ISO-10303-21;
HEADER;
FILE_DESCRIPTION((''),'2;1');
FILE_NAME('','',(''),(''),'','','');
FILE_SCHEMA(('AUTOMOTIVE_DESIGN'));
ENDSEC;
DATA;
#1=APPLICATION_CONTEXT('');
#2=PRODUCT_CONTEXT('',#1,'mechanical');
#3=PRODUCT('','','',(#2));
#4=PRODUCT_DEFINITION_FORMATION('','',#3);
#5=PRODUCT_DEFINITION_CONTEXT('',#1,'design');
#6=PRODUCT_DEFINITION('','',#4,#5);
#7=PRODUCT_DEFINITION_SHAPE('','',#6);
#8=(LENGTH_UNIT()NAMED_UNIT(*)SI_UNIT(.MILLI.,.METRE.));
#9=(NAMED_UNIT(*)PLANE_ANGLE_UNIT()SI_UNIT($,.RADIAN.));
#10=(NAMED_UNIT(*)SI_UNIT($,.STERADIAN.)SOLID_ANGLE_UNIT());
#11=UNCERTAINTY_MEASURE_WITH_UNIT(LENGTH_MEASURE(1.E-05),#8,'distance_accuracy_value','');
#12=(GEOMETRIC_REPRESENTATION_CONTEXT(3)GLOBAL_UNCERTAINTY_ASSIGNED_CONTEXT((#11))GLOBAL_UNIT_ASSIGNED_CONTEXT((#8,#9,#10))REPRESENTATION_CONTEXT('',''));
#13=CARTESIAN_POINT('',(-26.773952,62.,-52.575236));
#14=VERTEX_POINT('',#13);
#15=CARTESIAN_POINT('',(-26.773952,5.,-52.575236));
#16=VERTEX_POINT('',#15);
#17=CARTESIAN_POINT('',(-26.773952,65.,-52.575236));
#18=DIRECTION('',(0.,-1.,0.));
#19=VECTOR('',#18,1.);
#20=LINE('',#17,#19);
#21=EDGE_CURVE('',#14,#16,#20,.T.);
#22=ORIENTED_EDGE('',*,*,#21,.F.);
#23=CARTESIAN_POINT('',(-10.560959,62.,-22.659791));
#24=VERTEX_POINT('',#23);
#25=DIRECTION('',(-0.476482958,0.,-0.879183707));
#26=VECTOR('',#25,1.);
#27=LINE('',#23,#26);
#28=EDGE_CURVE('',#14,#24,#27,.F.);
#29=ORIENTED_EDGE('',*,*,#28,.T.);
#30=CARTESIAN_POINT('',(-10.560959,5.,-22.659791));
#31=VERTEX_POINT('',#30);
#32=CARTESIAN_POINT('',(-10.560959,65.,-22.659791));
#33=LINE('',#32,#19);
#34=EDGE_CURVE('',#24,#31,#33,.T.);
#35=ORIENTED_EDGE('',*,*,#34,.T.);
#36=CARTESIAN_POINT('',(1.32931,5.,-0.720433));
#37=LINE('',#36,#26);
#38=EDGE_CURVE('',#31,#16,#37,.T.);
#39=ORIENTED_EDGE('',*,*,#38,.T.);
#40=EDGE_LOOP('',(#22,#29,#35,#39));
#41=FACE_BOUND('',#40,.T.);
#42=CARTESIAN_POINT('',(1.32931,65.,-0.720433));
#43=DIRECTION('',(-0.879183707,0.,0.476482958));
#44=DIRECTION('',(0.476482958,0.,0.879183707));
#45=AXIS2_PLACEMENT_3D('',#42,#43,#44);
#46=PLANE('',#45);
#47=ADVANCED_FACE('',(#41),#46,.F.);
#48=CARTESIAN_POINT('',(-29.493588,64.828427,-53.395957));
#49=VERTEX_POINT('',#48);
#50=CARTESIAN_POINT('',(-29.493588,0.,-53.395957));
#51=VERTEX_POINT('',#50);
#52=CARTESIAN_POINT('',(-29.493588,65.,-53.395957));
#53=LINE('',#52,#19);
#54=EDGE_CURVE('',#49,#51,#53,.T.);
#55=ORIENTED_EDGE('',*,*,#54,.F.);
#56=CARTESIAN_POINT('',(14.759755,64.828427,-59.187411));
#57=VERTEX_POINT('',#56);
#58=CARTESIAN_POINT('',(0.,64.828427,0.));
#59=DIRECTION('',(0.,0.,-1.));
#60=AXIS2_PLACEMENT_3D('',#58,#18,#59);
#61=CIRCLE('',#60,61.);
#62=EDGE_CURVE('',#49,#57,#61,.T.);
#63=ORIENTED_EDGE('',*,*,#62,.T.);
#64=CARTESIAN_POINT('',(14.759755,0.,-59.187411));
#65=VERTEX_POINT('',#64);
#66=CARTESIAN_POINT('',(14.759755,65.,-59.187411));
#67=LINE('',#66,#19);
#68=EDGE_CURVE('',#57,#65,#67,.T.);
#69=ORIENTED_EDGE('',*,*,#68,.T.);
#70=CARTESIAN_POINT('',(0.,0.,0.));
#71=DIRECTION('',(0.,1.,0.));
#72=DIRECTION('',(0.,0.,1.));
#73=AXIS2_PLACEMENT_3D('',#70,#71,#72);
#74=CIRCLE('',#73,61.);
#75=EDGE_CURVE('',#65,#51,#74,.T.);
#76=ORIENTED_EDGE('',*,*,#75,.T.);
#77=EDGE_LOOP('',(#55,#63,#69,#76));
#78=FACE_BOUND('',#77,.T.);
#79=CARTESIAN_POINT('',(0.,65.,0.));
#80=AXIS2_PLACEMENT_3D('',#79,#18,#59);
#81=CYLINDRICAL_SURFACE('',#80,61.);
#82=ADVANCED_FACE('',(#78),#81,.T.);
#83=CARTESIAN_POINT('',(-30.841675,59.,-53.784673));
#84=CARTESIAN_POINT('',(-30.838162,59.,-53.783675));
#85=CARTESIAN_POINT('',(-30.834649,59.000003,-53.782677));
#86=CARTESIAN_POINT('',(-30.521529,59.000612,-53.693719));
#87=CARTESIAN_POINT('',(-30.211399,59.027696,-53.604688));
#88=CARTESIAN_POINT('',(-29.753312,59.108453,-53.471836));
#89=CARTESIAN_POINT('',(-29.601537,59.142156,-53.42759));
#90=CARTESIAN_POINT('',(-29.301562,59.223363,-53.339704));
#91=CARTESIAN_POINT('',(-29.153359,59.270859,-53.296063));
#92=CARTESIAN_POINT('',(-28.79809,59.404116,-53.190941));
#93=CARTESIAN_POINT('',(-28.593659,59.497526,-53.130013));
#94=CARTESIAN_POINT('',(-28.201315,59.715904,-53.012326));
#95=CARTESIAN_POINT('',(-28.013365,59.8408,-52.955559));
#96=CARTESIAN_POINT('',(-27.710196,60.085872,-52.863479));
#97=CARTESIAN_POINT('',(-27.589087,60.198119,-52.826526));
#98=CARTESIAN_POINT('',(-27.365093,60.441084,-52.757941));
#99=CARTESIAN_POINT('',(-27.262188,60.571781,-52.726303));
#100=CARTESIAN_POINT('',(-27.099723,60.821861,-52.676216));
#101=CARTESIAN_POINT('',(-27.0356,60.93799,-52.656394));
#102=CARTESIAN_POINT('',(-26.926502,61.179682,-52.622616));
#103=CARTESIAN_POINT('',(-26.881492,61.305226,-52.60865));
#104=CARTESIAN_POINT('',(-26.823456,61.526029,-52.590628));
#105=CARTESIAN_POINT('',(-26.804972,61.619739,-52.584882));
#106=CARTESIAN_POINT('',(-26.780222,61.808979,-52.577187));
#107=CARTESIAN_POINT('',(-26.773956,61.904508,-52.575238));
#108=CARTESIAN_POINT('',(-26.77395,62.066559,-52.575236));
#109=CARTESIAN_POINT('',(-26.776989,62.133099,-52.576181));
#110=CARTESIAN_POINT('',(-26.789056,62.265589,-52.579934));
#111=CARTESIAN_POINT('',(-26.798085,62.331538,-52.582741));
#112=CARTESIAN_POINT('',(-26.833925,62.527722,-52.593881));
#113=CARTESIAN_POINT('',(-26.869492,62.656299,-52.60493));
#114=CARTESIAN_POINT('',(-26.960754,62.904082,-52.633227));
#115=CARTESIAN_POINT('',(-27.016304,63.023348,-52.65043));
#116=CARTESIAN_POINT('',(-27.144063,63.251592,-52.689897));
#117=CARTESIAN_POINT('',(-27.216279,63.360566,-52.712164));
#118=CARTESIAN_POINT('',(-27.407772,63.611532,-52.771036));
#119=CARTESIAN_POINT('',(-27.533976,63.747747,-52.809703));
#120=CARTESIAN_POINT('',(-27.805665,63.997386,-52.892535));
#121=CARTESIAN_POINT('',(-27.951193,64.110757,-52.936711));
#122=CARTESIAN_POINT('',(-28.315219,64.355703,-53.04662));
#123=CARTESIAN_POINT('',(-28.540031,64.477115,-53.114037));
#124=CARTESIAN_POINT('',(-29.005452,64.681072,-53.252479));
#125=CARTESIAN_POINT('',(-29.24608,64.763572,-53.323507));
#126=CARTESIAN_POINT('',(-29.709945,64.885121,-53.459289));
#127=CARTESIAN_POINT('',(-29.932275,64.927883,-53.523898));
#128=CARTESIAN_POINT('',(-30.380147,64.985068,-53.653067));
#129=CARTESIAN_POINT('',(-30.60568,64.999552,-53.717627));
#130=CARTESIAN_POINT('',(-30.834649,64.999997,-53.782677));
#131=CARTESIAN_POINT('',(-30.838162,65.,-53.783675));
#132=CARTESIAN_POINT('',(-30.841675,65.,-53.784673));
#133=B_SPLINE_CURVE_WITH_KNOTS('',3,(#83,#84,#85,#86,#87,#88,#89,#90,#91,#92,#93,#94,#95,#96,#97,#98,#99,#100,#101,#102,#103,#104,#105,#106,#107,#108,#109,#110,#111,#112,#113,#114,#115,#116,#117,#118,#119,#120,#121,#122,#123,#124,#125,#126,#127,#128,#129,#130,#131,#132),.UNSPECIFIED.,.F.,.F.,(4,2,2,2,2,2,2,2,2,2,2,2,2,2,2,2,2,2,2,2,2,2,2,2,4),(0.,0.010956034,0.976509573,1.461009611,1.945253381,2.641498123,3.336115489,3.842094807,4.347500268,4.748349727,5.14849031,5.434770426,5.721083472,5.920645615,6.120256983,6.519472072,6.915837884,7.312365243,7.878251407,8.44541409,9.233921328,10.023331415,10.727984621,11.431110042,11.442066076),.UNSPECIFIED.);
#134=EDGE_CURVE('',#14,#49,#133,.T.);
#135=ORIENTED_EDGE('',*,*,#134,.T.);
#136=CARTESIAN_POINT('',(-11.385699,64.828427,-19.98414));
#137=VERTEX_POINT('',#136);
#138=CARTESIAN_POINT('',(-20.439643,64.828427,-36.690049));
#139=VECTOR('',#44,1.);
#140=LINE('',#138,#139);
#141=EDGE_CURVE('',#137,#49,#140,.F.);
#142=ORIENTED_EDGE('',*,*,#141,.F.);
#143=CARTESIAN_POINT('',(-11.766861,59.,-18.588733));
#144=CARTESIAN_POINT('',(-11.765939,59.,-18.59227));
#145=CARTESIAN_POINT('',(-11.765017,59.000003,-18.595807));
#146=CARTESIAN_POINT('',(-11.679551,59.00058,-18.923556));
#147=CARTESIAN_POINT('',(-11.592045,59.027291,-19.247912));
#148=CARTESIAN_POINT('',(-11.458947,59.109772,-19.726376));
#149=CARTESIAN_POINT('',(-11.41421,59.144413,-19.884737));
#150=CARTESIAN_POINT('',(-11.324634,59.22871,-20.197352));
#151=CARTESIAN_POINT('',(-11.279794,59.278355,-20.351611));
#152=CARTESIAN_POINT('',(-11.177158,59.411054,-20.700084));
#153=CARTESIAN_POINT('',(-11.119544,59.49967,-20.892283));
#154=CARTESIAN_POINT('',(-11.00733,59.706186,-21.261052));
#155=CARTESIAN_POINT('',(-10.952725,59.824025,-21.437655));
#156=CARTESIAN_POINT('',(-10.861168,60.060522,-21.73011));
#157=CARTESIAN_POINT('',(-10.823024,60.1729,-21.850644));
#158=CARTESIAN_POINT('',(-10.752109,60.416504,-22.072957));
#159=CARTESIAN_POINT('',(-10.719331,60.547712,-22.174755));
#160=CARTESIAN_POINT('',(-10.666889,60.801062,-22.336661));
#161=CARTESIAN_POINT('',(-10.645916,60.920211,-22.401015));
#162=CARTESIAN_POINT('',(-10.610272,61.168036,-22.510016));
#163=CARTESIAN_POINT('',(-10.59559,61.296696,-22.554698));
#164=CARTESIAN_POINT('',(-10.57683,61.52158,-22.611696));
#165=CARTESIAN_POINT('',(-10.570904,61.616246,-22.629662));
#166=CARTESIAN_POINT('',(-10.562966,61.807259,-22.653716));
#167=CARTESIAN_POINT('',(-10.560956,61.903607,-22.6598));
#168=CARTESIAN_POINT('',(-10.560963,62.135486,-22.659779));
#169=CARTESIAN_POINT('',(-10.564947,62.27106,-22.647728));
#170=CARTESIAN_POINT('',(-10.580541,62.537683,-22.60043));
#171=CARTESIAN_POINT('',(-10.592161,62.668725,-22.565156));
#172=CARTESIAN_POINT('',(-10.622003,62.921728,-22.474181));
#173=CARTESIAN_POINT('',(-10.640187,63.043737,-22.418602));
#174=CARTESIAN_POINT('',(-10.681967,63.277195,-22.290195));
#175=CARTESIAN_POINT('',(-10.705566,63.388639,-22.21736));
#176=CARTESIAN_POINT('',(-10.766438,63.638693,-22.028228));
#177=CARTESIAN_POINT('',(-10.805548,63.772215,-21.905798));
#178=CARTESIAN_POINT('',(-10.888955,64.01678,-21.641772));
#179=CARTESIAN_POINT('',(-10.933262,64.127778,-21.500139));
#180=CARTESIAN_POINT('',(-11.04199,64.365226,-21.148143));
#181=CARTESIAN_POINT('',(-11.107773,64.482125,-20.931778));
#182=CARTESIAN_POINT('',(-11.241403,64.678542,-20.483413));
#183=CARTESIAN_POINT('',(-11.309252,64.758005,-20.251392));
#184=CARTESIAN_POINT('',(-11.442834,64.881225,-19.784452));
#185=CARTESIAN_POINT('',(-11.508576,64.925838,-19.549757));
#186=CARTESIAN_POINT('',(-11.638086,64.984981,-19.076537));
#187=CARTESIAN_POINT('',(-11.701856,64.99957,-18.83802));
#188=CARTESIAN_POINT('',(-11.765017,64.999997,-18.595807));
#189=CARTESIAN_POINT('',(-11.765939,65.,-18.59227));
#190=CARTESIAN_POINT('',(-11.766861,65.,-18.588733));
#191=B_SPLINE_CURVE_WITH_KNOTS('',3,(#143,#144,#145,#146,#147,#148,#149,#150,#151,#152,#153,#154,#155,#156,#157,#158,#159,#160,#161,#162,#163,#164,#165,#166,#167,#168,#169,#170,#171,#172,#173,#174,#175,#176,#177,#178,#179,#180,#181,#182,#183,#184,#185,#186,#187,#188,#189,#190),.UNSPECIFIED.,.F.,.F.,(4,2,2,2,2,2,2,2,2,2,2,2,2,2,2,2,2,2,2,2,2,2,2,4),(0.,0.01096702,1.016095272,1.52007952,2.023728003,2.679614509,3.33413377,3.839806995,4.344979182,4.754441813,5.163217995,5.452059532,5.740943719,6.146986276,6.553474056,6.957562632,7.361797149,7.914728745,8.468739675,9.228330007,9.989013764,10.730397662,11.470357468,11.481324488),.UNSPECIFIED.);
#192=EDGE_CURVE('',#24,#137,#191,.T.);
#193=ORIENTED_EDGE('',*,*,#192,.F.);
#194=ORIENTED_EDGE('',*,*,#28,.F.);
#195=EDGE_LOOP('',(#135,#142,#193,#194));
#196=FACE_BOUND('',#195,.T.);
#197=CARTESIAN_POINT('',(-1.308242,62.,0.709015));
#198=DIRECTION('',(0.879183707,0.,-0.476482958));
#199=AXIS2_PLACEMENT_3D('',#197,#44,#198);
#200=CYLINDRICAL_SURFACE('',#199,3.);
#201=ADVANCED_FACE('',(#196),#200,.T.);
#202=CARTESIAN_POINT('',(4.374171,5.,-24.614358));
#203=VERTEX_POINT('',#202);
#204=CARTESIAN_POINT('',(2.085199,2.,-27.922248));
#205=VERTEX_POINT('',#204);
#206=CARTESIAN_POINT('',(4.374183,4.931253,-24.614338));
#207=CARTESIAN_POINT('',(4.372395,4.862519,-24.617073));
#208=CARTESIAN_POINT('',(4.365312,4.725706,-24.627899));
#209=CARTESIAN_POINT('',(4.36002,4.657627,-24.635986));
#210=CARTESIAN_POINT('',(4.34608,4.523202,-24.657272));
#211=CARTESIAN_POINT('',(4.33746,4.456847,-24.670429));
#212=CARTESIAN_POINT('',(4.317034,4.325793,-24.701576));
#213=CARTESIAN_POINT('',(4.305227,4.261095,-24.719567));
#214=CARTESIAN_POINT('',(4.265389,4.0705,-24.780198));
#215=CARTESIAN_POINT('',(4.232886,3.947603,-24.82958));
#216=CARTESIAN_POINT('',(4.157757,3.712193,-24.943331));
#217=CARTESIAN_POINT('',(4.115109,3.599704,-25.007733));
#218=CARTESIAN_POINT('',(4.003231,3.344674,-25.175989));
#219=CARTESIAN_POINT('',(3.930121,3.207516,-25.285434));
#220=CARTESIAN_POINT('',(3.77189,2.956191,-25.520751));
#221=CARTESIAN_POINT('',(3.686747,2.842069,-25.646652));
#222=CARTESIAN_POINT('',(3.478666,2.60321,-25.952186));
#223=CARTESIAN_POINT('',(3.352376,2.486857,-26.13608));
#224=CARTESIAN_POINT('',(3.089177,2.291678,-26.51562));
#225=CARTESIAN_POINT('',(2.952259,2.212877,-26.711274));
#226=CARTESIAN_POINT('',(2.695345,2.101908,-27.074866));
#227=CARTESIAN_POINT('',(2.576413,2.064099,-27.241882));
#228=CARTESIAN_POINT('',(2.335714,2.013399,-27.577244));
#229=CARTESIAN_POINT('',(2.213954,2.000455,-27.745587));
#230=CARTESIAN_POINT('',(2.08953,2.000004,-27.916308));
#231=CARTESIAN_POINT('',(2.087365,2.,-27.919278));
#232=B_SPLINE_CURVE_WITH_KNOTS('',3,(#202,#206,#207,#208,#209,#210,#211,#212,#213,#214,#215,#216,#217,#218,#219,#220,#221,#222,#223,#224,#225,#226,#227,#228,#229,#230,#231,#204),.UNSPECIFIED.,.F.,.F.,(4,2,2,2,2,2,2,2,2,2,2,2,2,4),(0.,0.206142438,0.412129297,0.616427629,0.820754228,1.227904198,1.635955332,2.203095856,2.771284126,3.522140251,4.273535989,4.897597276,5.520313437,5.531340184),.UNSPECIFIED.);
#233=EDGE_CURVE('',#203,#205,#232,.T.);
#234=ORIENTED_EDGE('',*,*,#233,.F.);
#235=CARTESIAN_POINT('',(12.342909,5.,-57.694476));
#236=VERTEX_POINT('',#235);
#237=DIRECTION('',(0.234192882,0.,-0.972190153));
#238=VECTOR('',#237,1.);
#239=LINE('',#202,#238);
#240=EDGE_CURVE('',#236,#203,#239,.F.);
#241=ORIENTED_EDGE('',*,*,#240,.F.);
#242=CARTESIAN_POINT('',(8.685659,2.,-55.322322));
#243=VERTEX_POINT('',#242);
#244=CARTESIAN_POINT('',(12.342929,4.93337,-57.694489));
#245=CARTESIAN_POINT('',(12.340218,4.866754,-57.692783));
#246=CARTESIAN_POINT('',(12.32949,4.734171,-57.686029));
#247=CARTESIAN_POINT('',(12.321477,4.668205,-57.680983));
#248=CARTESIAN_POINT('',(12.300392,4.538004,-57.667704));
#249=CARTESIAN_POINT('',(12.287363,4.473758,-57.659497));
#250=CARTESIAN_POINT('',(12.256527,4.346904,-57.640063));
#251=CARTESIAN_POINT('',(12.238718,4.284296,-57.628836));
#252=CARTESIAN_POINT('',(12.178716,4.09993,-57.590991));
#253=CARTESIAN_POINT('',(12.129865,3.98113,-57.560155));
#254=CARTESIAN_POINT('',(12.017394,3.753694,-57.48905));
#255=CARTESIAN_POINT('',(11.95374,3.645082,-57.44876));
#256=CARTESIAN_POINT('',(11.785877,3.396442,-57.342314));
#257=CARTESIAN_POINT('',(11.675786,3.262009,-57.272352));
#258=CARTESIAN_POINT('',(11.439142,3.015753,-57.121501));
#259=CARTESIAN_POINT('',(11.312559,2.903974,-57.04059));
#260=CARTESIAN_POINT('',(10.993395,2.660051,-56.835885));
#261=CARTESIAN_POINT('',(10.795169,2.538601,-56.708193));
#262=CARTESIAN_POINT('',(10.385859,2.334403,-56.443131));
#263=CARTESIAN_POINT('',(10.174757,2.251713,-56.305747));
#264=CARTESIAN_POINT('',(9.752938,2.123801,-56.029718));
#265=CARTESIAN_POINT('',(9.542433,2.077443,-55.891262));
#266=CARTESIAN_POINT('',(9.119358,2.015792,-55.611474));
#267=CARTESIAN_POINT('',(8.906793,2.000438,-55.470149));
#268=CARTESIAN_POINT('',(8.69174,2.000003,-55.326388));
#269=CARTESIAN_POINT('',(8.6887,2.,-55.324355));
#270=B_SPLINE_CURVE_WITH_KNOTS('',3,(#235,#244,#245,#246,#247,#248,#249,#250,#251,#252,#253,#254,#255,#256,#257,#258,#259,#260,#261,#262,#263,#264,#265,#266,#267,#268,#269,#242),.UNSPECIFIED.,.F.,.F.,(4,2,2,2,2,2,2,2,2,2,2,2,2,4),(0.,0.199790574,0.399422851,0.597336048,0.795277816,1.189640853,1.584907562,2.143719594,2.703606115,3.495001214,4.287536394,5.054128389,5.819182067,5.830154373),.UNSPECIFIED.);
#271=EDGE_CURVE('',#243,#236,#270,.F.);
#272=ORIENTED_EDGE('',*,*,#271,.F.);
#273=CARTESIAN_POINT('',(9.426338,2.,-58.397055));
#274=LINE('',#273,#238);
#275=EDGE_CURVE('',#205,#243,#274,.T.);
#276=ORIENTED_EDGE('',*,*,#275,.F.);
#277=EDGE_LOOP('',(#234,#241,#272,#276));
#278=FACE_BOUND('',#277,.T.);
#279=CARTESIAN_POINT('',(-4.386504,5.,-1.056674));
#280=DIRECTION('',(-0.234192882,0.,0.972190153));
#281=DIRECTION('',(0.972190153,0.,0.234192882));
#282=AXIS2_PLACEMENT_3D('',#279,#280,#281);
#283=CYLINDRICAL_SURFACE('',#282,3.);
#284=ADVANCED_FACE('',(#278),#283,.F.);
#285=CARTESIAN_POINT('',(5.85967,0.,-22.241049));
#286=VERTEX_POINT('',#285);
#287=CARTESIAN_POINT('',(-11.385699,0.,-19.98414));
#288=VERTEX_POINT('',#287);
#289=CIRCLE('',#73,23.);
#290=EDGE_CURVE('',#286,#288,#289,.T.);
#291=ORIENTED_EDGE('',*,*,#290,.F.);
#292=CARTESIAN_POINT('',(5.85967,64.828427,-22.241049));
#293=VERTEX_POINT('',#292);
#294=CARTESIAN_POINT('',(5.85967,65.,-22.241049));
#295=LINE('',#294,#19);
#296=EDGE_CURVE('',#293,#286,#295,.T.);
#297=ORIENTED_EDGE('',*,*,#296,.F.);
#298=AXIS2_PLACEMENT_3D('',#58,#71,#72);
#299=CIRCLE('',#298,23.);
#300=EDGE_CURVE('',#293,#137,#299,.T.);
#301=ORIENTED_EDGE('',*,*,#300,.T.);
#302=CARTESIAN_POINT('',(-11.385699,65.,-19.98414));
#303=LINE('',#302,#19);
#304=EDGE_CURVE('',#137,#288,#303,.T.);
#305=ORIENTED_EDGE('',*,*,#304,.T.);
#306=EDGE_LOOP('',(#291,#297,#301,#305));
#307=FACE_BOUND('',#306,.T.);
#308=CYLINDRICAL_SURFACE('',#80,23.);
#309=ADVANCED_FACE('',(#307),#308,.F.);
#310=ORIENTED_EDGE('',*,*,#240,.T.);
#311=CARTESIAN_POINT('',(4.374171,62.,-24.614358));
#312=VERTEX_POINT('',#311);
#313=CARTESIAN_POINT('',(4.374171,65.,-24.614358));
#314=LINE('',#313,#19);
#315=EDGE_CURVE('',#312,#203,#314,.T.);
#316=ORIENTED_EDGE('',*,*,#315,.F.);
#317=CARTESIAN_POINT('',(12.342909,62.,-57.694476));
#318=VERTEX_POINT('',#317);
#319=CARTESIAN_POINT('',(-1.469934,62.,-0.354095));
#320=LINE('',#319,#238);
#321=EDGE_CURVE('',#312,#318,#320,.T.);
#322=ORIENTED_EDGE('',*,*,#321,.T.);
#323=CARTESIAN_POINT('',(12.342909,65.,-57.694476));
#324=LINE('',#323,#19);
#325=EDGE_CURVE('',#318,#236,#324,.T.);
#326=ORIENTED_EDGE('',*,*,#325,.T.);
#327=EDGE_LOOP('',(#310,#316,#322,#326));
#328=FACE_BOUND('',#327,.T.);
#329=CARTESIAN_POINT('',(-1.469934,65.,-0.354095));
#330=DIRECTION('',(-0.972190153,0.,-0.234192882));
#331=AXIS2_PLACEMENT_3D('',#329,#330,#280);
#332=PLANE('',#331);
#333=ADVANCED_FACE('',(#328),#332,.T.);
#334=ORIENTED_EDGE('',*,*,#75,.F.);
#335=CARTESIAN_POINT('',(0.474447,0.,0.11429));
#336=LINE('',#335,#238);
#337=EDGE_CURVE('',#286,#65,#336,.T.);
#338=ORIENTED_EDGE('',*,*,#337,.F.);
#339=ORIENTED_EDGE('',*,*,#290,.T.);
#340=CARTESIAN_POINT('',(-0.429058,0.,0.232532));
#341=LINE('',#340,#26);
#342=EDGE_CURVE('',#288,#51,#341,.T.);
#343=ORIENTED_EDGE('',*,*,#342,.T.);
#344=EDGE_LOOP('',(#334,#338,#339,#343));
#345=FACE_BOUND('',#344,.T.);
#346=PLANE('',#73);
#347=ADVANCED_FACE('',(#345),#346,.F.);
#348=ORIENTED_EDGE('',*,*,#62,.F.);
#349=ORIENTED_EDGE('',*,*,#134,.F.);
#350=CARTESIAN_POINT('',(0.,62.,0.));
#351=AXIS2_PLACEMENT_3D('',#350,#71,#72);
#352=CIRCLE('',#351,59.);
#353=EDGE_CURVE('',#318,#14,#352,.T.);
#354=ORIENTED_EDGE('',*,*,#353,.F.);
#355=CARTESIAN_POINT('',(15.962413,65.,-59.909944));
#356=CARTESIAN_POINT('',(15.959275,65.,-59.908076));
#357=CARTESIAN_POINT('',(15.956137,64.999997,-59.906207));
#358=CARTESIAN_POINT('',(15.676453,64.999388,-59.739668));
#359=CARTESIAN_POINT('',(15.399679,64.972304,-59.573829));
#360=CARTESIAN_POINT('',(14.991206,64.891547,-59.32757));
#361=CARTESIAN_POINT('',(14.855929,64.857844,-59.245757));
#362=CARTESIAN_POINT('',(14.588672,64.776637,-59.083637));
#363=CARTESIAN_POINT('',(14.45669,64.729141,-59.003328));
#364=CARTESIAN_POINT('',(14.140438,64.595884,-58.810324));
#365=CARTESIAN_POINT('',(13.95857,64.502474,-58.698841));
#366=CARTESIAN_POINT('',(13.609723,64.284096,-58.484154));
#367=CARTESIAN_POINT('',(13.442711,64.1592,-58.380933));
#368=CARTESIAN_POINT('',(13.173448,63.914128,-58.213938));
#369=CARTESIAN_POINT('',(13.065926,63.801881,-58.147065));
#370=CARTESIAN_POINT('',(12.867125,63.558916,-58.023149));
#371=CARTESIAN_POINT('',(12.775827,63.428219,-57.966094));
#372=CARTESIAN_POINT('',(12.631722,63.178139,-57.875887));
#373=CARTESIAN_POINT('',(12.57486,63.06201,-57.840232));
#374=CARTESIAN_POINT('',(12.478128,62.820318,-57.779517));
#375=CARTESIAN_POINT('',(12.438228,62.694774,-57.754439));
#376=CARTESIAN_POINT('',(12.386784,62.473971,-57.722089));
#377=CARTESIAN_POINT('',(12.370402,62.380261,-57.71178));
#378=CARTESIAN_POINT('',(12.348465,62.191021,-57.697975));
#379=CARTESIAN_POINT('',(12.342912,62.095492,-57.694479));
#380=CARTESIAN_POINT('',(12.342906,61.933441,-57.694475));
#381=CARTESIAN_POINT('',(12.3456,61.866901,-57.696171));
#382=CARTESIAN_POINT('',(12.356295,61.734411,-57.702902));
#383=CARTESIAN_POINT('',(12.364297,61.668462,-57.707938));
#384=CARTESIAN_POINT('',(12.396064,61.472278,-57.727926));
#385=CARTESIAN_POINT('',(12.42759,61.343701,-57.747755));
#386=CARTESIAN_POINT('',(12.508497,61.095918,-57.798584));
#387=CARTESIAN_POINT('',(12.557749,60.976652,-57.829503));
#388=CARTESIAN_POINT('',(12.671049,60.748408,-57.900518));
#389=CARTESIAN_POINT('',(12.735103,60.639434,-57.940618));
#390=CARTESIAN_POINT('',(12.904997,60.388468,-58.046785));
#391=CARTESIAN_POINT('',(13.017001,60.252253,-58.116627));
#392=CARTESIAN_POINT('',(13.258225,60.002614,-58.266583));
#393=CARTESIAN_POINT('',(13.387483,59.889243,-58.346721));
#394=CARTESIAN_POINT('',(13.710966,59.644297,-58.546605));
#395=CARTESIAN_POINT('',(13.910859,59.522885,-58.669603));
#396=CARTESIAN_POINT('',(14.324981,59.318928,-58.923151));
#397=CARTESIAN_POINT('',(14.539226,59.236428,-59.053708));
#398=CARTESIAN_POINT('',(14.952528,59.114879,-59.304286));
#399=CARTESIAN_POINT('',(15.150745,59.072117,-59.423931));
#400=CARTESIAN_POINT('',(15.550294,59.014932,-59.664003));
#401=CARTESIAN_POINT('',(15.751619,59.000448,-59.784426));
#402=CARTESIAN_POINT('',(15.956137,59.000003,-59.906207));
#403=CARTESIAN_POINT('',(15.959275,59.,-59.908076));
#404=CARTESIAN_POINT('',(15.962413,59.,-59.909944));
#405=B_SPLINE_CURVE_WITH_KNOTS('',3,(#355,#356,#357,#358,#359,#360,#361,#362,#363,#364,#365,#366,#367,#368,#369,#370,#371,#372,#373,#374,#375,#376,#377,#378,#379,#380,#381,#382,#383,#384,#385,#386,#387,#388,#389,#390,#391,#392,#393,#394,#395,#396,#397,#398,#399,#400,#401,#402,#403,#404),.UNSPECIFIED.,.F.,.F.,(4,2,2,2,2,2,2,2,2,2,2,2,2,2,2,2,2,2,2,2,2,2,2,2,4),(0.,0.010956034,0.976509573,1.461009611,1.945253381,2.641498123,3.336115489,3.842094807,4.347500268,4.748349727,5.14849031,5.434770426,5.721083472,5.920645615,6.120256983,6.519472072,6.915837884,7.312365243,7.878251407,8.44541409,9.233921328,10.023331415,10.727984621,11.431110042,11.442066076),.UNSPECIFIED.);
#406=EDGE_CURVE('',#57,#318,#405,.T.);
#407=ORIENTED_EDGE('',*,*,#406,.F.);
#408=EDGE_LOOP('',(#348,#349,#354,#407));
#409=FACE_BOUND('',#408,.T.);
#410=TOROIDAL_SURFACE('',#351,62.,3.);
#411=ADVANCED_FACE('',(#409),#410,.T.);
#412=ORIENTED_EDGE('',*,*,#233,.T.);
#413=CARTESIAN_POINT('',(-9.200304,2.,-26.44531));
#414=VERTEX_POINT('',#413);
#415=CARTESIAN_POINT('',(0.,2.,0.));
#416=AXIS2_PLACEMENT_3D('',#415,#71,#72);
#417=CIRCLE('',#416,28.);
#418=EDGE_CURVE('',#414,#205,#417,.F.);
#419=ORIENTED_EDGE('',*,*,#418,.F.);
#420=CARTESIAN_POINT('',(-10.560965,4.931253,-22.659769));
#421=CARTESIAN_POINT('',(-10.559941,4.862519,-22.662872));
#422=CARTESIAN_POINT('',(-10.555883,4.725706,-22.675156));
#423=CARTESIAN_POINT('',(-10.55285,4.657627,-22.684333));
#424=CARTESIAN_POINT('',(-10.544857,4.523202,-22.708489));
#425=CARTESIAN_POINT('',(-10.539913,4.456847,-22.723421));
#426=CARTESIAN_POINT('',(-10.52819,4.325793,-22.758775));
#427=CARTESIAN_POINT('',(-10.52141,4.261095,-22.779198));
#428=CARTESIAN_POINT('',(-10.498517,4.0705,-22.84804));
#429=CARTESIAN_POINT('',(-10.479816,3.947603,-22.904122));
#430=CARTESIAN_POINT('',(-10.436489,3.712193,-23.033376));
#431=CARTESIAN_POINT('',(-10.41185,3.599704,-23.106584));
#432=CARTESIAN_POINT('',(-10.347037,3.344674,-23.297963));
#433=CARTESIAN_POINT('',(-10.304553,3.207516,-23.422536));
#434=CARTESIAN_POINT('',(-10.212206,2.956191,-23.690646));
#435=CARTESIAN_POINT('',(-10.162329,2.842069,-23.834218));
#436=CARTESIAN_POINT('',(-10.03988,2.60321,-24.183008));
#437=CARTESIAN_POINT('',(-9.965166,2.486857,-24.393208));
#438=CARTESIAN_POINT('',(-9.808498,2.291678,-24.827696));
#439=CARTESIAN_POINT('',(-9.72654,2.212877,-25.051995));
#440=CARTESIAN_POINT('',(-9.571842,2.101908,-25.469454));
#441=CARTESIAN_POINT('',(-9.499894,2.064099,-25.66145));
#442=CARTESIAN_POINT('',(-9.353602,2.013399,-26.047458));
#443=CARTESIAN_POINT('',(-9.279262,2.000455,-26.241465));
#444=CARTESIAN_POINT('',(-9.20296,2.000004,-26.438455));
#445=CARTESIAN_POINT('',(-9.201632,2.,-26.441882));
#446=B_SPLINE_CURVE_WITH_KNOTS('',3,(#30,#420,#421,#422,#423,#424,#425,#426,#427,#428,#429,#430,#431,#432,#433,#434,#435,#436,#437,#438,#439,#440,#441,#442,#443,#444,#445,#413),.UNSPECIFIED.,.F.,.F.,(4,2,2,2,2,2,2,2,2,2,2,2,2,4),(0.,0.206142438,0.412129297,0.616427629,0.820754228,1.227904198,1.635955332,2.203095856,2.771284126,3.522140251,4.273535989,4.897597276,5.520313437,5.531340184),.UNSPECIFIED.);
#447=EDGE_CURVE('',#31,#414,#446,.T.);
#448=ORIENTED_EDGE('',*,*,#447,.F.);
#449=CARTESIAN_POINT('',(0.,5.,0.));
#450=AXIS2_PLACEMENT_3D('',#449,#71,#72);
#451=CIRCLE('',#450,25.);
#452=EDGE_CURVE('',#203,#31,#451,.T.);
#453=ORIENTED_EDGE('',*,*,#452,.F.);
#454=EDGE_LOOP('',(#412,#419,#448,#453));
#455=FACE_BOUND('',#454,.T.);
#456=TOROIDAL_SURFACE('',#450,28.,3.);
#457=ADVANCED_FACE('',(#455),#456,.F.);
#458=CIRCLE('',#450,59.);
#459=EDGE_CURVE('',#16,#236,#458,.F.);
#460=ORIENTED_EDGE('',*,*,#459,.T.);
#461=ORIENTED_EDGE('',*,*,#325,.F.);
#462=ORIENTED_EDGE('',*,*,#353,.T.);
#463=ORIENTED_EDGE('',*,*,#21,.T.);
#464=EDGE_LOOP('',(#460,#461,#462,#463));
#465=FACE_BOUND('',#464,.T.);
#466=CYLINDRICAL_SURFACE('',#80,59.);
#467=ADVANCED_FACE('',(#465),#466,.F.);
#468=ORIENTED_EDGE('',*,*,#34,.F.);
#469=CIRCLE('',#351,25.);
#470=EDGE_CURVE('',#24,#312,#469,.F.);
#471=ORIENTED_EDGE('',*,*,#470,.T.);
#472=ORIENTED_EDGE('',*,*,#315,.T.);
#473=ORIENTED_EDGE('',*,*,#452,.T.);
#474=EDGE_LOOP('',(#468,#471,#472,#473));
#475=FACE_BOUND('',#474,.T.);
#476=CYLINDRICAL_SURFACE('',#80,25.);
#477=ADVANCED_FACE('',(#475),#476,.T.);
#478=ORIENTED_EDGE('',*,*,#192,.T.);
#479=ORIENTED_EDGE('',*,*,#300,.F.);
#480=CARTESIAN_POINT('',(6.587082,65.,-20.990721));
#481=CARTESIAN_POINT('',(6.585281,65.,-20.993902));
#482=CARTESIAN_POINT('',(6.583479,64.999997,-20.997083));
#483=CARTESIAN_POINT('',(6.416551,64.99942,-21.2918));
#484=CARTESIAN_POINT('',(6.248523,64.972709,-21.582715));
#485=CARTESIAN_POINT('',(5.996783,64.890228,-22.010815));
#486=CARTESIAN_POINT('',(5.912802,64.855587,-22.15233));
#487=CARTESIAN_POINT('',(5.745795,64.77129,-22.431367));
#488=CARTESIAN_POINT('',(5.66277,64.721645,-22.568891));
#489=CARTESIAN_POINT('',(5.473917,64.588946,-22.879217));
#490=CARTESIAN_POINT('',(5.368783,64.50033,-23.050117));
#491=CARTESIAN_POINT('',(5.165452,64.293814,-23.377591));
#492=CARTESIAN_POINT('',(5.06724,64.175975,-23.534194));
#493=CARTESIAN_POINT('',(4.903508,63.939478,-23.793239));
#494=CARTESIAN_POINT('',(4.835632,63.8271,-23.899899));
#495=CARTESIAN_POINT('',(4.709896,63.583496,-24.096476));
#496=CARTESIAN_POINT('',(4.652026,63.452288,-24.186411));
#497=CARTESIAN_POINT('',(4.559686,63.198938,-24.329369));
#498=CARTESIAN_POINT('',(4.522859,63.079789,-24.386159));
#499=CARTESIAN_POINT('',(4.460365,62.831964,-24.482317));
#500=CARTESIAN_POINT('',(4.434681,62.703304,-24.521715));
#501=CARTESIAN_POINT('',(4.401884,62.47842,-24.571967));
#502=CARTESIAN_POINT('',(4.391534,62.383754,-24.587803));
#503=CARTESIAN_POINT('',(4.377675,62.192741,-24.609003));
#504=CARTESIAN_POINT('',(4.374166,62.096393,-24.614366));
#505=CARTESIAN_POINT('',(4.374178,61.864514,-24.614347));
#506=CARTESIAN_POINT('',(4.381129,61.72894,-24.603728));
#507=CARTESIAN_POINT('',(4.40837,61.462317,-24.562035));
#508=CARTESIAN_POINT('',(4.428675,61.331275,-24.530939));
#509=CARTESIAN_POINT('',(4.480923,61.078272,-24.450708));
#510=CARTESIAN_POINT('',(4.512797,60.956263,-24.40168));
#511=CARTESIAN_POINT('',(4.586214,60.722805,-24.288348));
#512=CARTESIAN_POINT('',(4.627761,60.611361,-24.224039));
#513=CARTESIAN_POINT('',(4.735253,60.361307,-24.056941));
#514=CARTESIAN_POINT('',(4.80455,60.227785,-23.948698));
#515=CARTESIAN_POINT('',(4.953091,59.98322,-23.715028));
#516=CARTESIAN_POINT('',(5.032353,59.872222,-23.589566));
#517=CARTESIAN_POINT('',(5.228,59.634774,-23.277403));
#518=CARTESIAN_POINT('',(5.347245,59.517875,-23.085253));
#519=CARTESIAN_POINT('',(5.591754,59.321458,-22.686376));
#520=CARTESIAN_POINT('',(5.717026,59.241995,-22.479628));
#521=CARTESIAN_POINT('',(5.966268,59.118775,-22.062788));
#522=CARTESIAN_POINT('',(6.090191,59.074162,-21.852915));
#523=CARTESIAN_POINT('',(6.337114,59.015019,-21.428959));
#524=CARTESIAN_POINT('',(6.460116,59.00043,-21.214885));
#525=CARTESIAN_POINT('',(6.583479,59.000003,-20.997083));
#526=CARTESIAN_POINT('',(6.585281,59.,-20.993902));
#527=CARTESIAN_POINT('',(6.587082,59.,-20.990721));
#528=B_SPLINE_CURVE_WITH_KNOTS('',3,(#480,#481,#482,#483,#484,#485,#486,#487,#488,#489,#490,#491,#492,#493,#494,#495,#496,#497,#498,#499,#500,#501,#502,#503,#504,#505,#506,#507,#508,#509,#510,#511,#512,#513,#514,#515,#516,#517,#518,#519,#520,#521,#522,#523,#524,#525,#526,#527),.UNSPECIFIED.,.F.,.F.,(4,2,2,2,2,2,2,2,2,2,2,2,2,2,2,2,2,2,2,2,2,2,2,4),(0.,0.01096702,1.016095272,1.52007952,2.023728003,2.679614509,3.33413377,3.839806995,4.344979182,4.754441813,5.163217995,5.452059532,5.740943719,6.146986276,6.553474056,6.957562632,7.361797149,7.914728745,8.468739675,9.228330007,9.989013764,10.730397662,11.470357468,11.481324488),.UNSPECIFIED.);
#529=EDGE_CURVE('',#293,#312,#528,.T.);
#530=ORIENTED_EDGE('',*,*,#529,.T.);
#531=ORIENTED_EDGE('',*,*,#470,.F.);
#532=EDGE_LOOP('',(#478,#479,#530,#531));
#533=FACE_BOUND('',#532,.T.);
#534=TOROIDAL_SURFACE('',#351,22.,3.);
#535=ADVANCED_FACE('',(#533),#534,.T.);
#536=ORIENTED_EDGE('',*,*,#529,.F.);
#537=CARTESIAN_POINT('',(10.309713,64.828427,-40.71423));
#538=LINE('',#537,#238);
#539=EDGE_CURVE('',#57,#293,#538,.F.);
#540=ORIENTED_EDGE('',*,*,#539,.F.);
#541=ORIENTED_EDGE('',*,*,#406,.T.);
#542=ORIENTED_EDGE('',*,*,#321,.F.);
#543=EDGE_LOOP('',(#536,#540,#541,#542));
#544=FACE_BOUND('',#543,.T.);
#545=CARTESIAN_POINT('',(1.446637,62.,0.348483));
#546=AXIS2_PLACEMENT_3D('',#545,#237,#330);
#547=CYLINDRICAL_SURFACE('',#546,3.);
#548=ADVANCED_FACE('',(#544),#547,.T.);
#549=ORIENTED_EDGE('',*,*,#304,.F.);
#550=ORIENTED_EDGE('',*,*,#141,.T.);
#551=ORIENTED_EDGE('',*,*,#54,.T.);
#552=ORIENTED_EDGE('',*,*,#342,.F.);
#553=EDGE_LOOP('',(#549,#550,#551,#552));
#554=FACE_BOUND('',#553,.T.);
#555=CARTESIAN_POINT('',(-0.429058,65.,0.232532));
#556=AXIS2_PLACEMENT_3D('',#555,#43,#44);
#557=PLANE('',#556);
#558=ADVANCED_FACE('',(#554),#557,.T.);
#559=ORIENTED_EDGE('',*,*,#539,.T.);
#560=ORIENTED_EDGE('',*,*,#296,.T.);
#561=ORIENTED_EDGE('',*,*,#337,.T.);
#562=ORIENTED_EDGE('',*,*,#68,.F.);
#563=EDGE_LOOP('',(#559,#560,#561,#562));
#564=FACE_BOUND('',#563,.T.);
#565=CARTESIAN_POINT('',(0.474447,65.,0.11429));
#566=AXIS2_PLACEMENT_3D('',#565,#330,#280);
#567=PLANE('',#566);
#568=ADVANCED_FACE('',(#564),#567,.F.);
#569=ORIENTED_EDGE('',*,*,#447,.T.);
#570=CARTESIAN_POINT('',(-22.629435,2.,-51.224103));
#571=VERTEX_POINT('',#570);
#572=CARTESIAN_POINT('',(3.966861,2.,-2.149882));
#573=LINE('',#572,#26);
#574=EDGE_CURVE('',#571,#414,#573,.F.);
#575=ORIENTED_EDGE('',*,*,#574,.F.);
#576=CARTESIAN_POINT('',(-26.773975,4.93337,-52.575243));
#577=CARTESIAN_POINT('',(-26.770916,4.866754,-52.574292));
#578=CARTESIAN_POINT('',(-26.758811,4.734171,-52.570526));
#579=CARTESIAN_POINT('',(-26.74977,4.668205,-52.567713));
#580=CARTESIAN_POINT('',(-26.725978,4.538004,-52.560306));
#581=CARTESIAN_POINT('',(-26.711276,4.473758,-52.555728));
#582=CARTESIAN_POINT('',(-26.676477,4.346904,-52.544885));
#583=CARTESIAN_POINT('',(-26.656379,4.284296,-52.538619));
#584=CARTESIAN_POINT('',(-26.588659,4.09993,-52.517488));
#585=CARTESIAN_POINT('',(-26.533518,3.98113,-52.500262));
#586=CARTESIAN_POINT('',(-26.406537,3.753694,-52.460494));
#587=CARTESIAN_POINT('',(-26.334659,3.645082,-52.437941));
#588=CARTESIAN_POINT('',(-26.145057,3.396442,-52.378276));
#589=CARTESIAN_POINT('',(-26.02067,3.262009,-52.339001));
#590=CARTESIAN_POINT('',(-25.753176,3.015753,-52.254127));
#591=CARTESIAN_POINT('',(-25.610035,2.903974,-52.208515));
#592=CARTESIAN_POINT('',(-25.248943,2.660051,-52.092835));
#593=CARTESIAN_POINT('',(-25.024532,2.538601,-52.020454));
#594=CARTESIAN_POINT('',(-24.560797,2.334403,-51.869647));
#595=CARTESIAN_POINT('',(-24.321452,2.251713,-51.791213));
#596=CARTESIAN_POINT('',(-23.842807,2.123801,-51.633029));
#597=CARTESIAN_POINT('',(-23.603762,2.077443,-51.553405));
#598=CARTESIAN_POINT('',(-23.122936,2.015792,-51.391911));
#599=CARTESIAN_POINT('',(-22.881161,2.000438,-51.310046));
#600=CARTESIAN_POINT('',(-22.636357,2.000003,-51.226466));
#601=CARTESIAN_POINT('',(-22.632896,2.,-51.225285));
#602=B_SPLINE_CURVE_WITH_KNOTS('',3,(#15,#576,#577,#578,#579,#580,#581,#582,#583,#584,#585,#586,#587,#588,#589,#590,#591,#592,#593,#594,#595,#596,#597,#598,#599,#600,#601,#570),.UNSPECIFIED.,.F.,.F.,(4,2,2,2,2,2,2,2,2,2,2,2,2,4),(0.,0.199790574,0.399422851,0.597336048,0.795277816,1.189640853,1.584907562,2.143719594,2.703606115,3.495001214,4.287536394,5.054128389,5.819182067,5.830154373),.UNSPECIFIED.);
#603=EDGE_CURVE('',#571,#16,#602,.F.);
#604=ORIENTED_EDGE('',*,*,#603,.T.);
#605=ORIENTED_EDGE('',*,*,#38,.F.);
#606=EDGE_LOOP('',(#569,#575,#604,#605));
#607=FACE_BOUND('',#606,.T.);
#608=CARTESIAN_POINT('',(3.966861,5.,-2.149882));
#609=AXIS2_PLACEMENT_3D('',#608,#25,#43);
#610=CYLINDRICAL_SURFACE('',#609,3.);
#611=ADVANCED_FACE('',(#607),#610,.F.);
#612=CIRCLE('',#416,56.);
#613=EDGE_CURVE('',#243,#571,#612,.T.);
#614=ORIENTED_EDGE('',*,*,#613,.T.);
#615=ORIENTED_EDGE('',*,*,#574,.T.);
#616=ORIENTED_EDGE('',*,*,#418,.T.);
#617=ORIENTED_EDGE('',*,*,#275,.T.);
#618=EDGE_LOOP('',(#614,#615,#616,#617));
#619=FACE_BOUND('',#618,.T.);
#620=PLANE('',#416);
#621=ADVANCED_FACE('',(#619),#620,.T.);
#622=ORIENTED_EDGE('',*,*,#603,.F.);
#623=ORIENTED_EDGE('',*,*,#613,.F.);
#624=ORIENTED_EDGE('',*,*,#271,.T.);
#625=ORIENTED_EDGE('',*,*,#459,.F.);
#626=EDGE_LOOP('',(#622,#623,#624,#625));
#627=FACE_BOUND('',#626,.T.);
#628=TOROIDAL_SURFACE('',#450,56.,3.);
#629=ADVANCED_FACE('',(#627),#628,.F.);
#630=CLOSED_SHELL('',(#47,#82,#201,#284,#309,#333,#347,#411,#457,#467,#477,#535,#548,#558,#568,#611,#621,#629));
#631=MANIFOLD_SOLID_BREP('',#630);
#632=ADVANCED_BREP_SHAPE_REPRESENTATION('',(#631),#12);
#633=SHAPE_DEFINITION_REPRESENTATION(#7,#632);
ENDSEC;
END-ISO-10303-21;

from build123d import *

# Parameters (mm, degrees)
BOSS_EXTRUDE1_DEPTH = 2
BOSS_EXTRUDE2_DEPTH = 65
FILLET1_R           = 3


with BuildPart() as part:
    # Sketch1 → Boss-Extrude1 (new body)
    with BuildSketch(Plane(origin=(0, 0, 0), x_dir=(1, 0, 0), z_dir=(0, 1, 0))):
        with BuildLine():
            Line((-10.560958787, 22.659791471), (-26.773952234, 52.575236393))
            ThreePointArc((-26.773952234, 52.575236393), (-7.656070137, 58.501150331), (12.342908564, 57.69447641))
            Line((12.342908564, 57.69447641), (4.374170949, 24.614358178))
            ThreePointArc((4.374170949, 24.614358178), (-3.244097516, 24.788623022), (-10.560958787, 22.659791471))
        make_face()
    extrude(amount=BOSS_EXTRUDE1_DEPTH)

    # Sketch1<3> → Boss-Extrude2 (add)
    with BuildSketch(Plane(origin=(0, 0, 0), x_dir=(1, 0, 0), z_dir=(0, 1, 0))):
        with BuildLine():
            ThreePointArc((5.859670357, 22.24104906), (-2.984569714, 22.80553318), (-11.385698648, 19.984140369))
            Line((-11.385698648, 19.984140369), (-29.493588104, 53.395957344))
            ThreePointArc((-29.493588104, 53.395957344), (-7.915597938, 60.484240173), (14.75975536, 59.187411007))
            Line((14.75975536, 59.187411007), (5.859670357, 22.24104906))
        make_face()
        with BuildLine():
            Line((4.374170949, 24.614358178), (12.342908564, 57.69447641))
            ThreePointArc((12.342908564, 57.69447641), (-7.656070137, 58.501150331), (-26.773952234, 52.575236393))
            Line((-26.773952234, 52.575236393), (-10.560958787, 22.659791471))
            ThreePointArc((-10.560958787, 22.659791471), (-3.244097516, 24.788623022), (4.374170949, 24.614358178))
        make_face(mode=Mode.SUBTRACT)
    extrude(amount=BOSS_EXTRUDE2_DEPTH)

    # Fillet1
    # the kernel refuses this fillet: 3 mm, written as the material it adds along each edge
    with BuildSketch(Plane(origin=(-6.987336603, 2, -16.065913667), x_dir=(0, 1, 0), z_dir=(-0.4764829578611926, 0, -0.879183707121469))) as fillet1_piece_1_section:
        with BuildLine():
            CenterArc((FILLET1_R, FILLET1_R), FILLET1_R, 180, 90)
            Line((0, FILLET1_R), (0, 0))
            Line((0, 0), (FILLET1_R, 0))
        make_face()
    fillet1_piece_1 = extrude(amount=49.02638684, mode=Mode.PRIVATE)
    fillet1_piece_1 = fillet1_piece_1 & Plane(origin=(0, 2, 0), x_dir=(0.20920184006511774, 0, -0.977872481519635), z_dir=(0, -1, 0)) * Cylinder(59, 111, mode=Mode.PRIVATE)
    fillet1_piece_1 = fillet1_piece_1 - Plane(origin=(0, 2, 0), x_dir=(-0.4224383514814905, 0, -0.9063916588305525), z_dir=(0, -1, 0)) * Cylinder(25, 111, mode=Mode.PRIVATE)
    add(fillet1_piece_1)
    with BuildSketch(Plane(origin=(0, 2, 0), x_dir=(0.4581300705855368, 0, -0.8888851660508748), z_dir=(0.8888851660508748, 0, 0.4581300705855368))) as fillet1_piece_2_section:
        with BuildLine():
            CenterArc((25 + FILLET1_R, FILLET1_R), FILLET1_R, 180, 90)
            Line((25 + FILLET1_R, 0), (25, 0))
            Line((25, 0), (25, FILLET1_R))
        make_face()
    fillet1_piece_2 = revolve(axis=Axis((0, 2, 0), (0, 1, 0)), revolution_arc=69.444918607, mode=Mode.PRIVATE)
    fillet1_piece_2 = split(fillet1_piece_2, bisect_by=Plane(origin=(-1.469933591, 2, -0.354095322), z_dir=(-0.9721901531046743, 0, -0.23419288248431033)), keep=Keep.TOP, mode=Mode.PRIVATE)
    fillet1_piece_2 = split(fillet1_piece_2, bisect_by=Plane(origin=(1.329309559, 2, -0.720433449), z_dir=(0.879183707121469, 0, -0.4764829578611926)), keep=Keep.TOP, mode=Mode.PRIVATE)
    add(fillet1_piece_2)
    with BuildSketch(Plane(origin=(14.099355182, 2, -64.985902558), x_dir=(0, 1, 0), z_dir=(-0.23419288248431033, 0, 0.9721901531046743))) as fillet1_piece_3_section:
        with BuildLine():
            CenterArc((FILLET1_R, FILLET1_R), FILLET1_R, 180, 90)
            Line((0, FILLET1_R), (0, 0))
            Line((0, 0), (FILLET1_R, 0))
        make_face()
    fillet1_piece_3 = extrude(amount=49.02638684, mode=Mode.PRIVATE)
    fillet1_piece_3 = fillet1_piece_3 & Plane(origin=(0, 2, 0), x_dir=(0.20920184006511774, 0, -0.977872481519635), z_dir=(0, -1, 0)) * Cylinder(59, 111, mode=Mode.PRIVATE)
    fillet1_piece_3 = fillet1_piece_3 - Plane(origin=(0, 2, 0), x_dir=(-0.4224383514814905, 0, -0.9063916588305525), z_dir=(0, -1, 0)) * Cylinder(25, 111, mode=Mode.PRIVATE)
    add(fillet1_piece_3)
    with BuildSketch(Plane(origin=(0, 2, 0), x_dir=(-0.5631135264188442, 0, -0.8263795474018787), z_dir=(-0.8263795474018787, 0, 0.5631135264188442))) as fillet1_piece_4_section:
        with BuildLine():
            CenterArc((59 - FILLET1_R, -FILLET1_R), FILLET1_R, 0, 90)
            Line((59 - FILLET1_R, 0), (59, 0))
            Line((59, 0), (59, -FILLET1_R))
        make_face()
    fillet1_piece_4 = revolve(axis=Axis((0, 2, 0), (0, -1, 0)), revolution_arc=53.630888503, mode=Mode.PRIVATE)
    fillet1_piece_4 = split(fillet1_piece_4, bisect_by=Plane(origin=(-1.469933591, 2, -0.354095322), z_dir=(-0.9721901531046743, 0, -0.23419288248431033)), keep=Keep.TOP, mode=Mode.PRIVATE)
    fillet1_piece_4 = split(fillet1_piece_4, bisect_by=Plane(origin=(1.329309559, 2, -0.720433449), z_dir=(0.879183707121469, 0, -0.4764829578611926)), keep=Keep.TOP, mode=Mode.PRIVATE)
    add(fillet1_piece_4)
    # the kernel refuses this fillet: 3 mm, written as the material it takes off along each edge
    with BuildSketch(Plane(origin=(0, 65, 0), x_dir=(-0.6714413755332248, 0, -0.7410576760428644), z_dir=(-0.7410576760428644, 0, 0.6714413755332248))) as fillet1_2_piece_1_section:
        with BuildLine():
            CenterArc((25 - FILLET1_R, FILLET1_R), FILLET1_R, 270, 90)
            Line((25, FILLET1_R), (25, 0))
            Line((25, 0), (25 - FILLET1_R, 0))
        make_face()
    fillet1_2_piece_1 = revolve(axis=Axis((0, 65, 0), (0, -1, 0)), revolution_arc=69.444918607, mode=Mode.PRIVATE)
    fillet1_2_piece_1 = split(fillet1_2_piece_1, bisect_by=Plane(origin=(-1.469933591, 65, -0.354095322), z_dir=(-0.9721901531046743, 0, -0.23419288248431033)), keep=Keep.TOP, mode=Mode.PRIVATE)
    fillet1_2_piece_1 = split(fillet1_2_piece_1, bisect_by=Plane(origin=(1.329309559, 65, -0.720433449), z_dir=(0.879183707121469, 0, -0.4764829578611926)), keep=Keep.TOP, mode=Mode.PRIVATE)
    add(fillet1_2_piece_1, mode=Mode.SUBTRACT)
    with BuildSketch(Plane(origin=(-30.347574418, 65, -59.169114196), x_dir=(-0.879183707121469, 0, 0.47648295786119255), z_dir=(0.4764829578611926, 0, 0.879183707121469))) as fillet1_2_piece_2_section:
        with BuildLine():
            CenterArc((FILLET1_R, FILLET1_R), FILLET1_R, 180, 90)
            Line((0, FILLET1_R), (0, 0))
            Line((0, 0), (FILLET1_R, 0))
        make_face()
    fillet1_2_piece_2 = extrude(amount=49.02638684, mode=Mode.PRIVATE)
    fillet1_2_piece_2 = fillet1_2_piece_2 & Plane(origin=(0, 65, 0), x_dir=(0.20920184006511774, 0, -0.977872481519635), z_dir=(0, -1, 0)) * Cylinder(59, 111, mode=Mode.PRIVATE)
    fillet1_2_piece_2 = fillet1_2_piece_2 - Plane(origin=(0, 65, 0), x_dir=(-0.4224383514814905, 0, -0.9063916588305525), z_dir=(0, -1, 0)) * Cylinder(25, 111, mode=Mode.PRIVATE)
    add(fillet1_2_piece_2, mode=Mode.SUBTRACT)
    with BuildSketch(Plane(origin=(2.617724331, 65, -17.32293203), x_dir=(0.9721901531046743, 0, 0.23419288248431033), z_dir=(0.23419288248431033, 0, -0.9721901531046743))) as fillet1_2_piece_3_section:
        with BuildLine():
            CenterArc((FILLET1_R, FILLET1_R), FILLET1_R, 180, 90)
            Line((0, FILLET1_R), (0, 0))
            Line((0, 0), (FILLET1_R, 0))
        make_face()
    fillet1_2_piece_3 = extrude(amount=49.02638684, mode=Mode.PRIVATE)
    fillet1_2_piece_3 = fillet1_2_piece_3 & Plane(origin=(0, 65, 0), x_dir=(0.20920184006511774, 0, -0.977872481519635), z_dir=(0, -1, 0)) * Cylinder(59, 111, mode=Mode.PRIVATE)
    fillet1_2_piece_3 = fillet1_2_piece_3 - Plane(origin=(0, 65, 0), x_dir=(-0.4224383514814905, 0, -0.9063916588305525), z_dir=(0, -1, 0)) * Cylinder(25, 111, mode=Mode.PRIVATE)
    add(fillet1_2_piece_3, mode=Mode.SUBTRACT)
    with BuildSketch(Plane(origin=(0, 65, 0), x_dir=(0.33149424176414766, 0, -0.9434572421033254), z_dir=(0.9434572421033254, 0, 0.33149424176414766))) as fillet1_2_piece_4_section:
        with BuildLine():
            CenterArc((59 + FILLET1_R, -FILLET1_R), FILLET1_R, 90, 90)
            Line((59, -FILLET1_R), (59, 0))
            Line((59, 0), (59 + FILLET1_R, 0))
        make_face()
    fillet1_2_piece_4 = revolve(axis=Axis((0, 65, 0), (0, 1, 0)), revolution_arc=53.630888503, mode=Mode.PRIVATE)
    fillet1_2_piece_4 = split(fillet1_2_piece_4, bisect_by=Plane(origin=(-1.469933591, 65, -0.354095322), z_dir=(-0.9721901531046743, 0, -0.23419288248431033)), keep=Keep.TOP, mode=Mode.PRIVATE)
    fillet1_2_piece_4 = split(fillet1_2_piece_4, bisect_by=Plane(origin=(1.329309559, 65, -0.720433449), z_dir=(0.879183707121469, 0, -0.4764829578611926)), keep=Keep.TOP, mode=Mode.PRIVATE)
    add(fillet1_2_piece_4, mode=Mode.SUBTRACT)
    with BuildSketch(Plane(origin=(-30.347574418, 65, -59.169114196), x_dir=(-0.879183707121469, 0, 0.47648295786119255), z_dir=(0.4764829578611926, 0, 0.879183707121469))) as fillet1_2_piece_5a_section:
        with BuildLine():
            CenterArc((FILLET1_R, FILLET1_R), FILLET1_R, 180, 90)
            Line((0, FILLET1_R), (0, 0))
            Line((0, 0), (FILLET1_R, 0))
        make_face()
    fillet1_2_piece_5a = extrude(amount=49.02638684, mode=Mode.PRIVATE)
    fillet1_2_piece_5a = fillet1_2_piece_5a - Plane(origin=(0, 65, 0), x_dir=(0.25476827639356225, 0, -0.9670021330604465), z_dir=(0, -1, 0)) * Cylinder(23, 111, mode=Mode.PRIVATE)
    fillet1_2_piece_5a = split(fillet1_2_piece_5a, bisect_by=Plane(origin=(-32.105941832, 65, -58.216148281), z_dir=(0.8791837071214691, 0, -0.47648295786119255)), keep=Keep.TOP, mode=Mode.PRIVATE)
    fillet1_2_piece_5a = fillet1_2_piece_5a & Plane(origin=(0, 65, 0), x_dir=(-0.4224383514814905, 0, -0.9063916588305525), z_dir=(0, -1, 0)) * Cylinder(25, 111, mode=Mode.PRIVATE)
    with BuildSketch(Plane(origin=(0, 65, 0), x_dir=(-0.6714413755332248, 0, -0.7410576760428644), z_dir=(-0.7410576760428644, 0, 0.6714413755332248))) as fillet1_2_piece_5b_section:
        with BuildLine():
            CenterArc((25 - FILLET1_R, FILLET1_R), FILLET1_R, 270, 90)
            Line((25, FILLET1_R), (25, 0))
            Line((25, 0), (25 - FILLET1_R, 0))
        make_face()
    fillet1_2_piece_5b = revolve(axis=Axis((0, 65, 0), (0, -1, 0)), revolution_arc=69.444918607, mode=Mode.PRIVATE)
    fillet1_2_piece_5b = fillet1_2_piece_5b - Plane(origin=(0, 65, 0), x_dir=(0.25476827639356225, 0, -0.9670021330604465), z_dir=(0, -1, 0)) * Cylinder(23, 100, mode=Mode.PRIVATE)
    fillet1_2_piece_5b = split(fillet1_2_piece_5b, bisect_by=Plane(origin=(-0.429057855, 65, 0.232532466), z_dir=(0.8791837071214691, 0, -0.47648295786119255)), keep=Keep.TOP, mode=Mode.PRIVATE)
    fillet1_2_piece_5b = split(fillet1_2_piece_5b, bisect_by=Plane(origin=(1.329309559, 65, -0.720433449), z_dir=(-0.879183707121469, 0, 0.4764829578611926)), keep=Keep.TOP, mode=Mode.PRIVATE)
    fillet1_2_piece_5 = fillet1_2_piece_5a & fillet1_2_piece_5b
    add(fillet1_2_piece_5, mode=Mode.SUBTRACT)
    with BuildSketch(Plane(origin=(2.617724331, 65, -17.32293203), x_dir=(0.9721901531046743, 0, 0.23419288248431033), z_dir=(0.23419288248431033, 0, -0.9721901531046743))) as fillet1_2_piece_6a_section:
        with BuildLine():
            CenterArc((FILLET1_R, FILLET1_R), FILLET1_R, 180, 90)
            Line((0, FILLET1_R), (0, 0))
            Line((0, 0), (FILLET1_R, 0))
        make_face()
    fillet1_2_piece_6a = extrude(amount=49.02638684, mode=Mode.PRIVATE)
    fillet1_2_piece_6a = split(fillet1_2_piece_6a, bisect_by=Plane(origin=(4.562104637, 65, -16.854546265), z_dir=(-0.9721901531046744, 0, -0.23419288248431033)), keep=Keep.TOP, mode=Mode.PRIVATE)
    fillet1_2_piece_6a = fillet1_2_piece_6a - Plane(origin=(0, 65, 0), x_dir=(0.25476827639356225, 0, -0.9670021330604465), z_dir=(0, -1, 0)) * Cylinder(23, 111, mode=Mode.PRIVATE)
    fillet1_2_piece_6a = fillet1_2_piece_6a & Plane(origin=(0, 65, 0), x_dir=(-0.4224383514814905, 0, -0.9063916588305525), z_dir=(0, -1, 0)) * Cylinder(25, 111, mode=Mode.PRIVATE)
    with BuildSketch(Plane(origin=(0, 65, 0), x_dir=(-0.6714413755332248, 0, -0.7410576760428644), z_dir=(-0.7410576760428644, 0, 0.6714413755332248))) as fillet1_2_piece_6b_section:
        with BuildLine():
            CenterArc((25 - FILLET1_R, FILLET1_R), FILLET1_R, 270, 90)
            Line((25, FILLET1_R), (25, 0))
            Line((25, 0), (25 - FILLET1_R, 0))
        make_face()
    fillet1_2_piece_6b = revolve(axis=Axis((0, 65, 0), (0, -1, 0)), revolution_arc=69.444918607, mode=Mode.PRIVATE)
    fillet1_2_piece_6b = split(fillet1_2_piece_6b, bisect_by=Plane(origin=(0.474446715, 65, 0.114290443), z_dir=(-0.9721901531046744, 0, -0.23419288248431033)), keep=Keep.TOP, mode=Mode.PRIVATE)
    fillet1_2_piece_6b = fillet1_2_piece_6b - Plane(origin=(0, 65, 0), x_dir=(0.25476827639356225, 0, -0.9670021330604465), z_dir=(0, -1, 0)) * Cylinder(23, 100, mode=Mode.PRIVATE)
    fillet1_2_piece_6b = split(fillet1_2_piece_6b, bisect_by=Plane(origin=(-1.469933591, 65, -0.354095322), z_dir=(0.9721901531046743, 0, 0.23419288248431033)), keep=Keep.TOP, mode=Mode.PRIVATE)
    fillet1_2_piece_6 = fillet1_2_piece_6a & fillet1_2_piece_6b
    add(fillet1_2_piece_6, mode=Mode.SUBTRACT)
    with BuildSketch(Plane(origin=(0, 65, 0), x_dir=(0.33149424176414766, 0, -0.9434572421033254), z_dir=(0.9434572421033254, 0, 0.33149424176414766))) as fillet1_2_piece_7a_section:
        with BuildLine():
            CenterArc((59 + FILLET1_R, -FILLET1_R), FILLET1_R, 90, 90)
            Line((59, -FILLET1_R), (59, 0))
            Line((59, 0), (59 + FILLET1_R, 0))
        make_face()
    fillet1_2_piece_7a = revolve(axis=Axis((0, 65, 0), (0, 1, 0)), revolution_arc=53.630888503, mode=Mode.PRIVATE)
    fillet1_2_piece_7a = fillet1_2_piece_7a & Plane(origin=(0, 65, 0), x_dir=(-0.4835014443344291, 0, -0.8753435630234113), z_dir=(0, -1, 0)) * Cylinder(61, 248, mode=Mode.PRIVATE)
    fillet1_2_piece_7a = split(fillet1_2_piece_7a, bisect_by=Plane(origin=(-0.429057855, 65, 0.232532466), z_dir=(0.8791837071214691, 0, -0.47648295786119255)), keep=Keep.TOP, mode=Mode.PRIVATE)
    fillet1_2_piece_7a = split(fillet1_2_piece_7a, bisect_by=Plane(origin=(1.329309559, 65, -0.720433449), z_dir=(-0.879183707121469, 0, 0.4764829578611926)), keep=Keep.TOP, mode=Mode.PRIVATE)
    with BuildSketch(Plane(origin=(-30.347574418, 65, -59.169114196), x_dir=(-0.879183707121469, 0, 0.47648295786119255), z_dir=(0.4764829578611926, 0, 0.879183707121469))) as fillet1_2_piece_7b_section:
        with BuildLine():
            CenterArc((FILLET1_R, FILLET1_R), FILLET1_R, 180, 90)
            Line((0, FILLET1_R), (0, 0))
            Line((0, 0), (FILLET1_R, 0))
        make_face()
    fillet1_2_piece_7b = extrude(amount=49.02638684, mode=Mode.PRIVATE)
    fillet1_2_piece_7b = fillet1_2_piece_7b & Plane(origin=(0, 65, 0), x_dir=(-0.4835014443344291, 0, -0.8753435630234113), z_dir=(0, -1, 0)) * Cylinder(61, 111, mode=Mode.PRIVATE)
    fillet1_2_piece_7b = split(fillet1_2_piece_7b, bisect_by=Plane(origin=(-32.105941832, 65, -58.216148281), z_dir=(0.8791837071214691, 0, -0.47648295786119255)), keep=Keep.TOP, mode=Mode.PRIVATE)
    fillet1_2_piece_7b = fillet1_2_piece_7b - Plane(origin=(0, 65, 0), x_dir=(0.20920184006511774, 0, -0.977872481519635), z_dir=(0, -1, 0)) * Cylinder(59, 111, mode=Mode.PRIVATE)
    fillet1_2_piece_7 = fillet1_2_piece_7a & fillet1_2_piece_7b
    add(fillet1_2_piece_7, mode=Mode.SUBTRACT)
    with BuildSketch(Plane(origin=(2.617724331, 65, -17.32293203), x_dir=(0.9721901531046743, 0, 0.23419288248431033), z_dir=(0.23419288248431033, 0, -0.9721901531046743))) as fillet1_2_piece_8a_section:
        with BuildLine():
            CenterArc((FILLET1_R, FILLET1_R), FILLET1_R, 180, 90)
            Line((0, FILLET1_R), (0, 0))
            Line((0, 0), (FILLET1_R, 0))
        make_face()
    fillet1_2_piece_8a = extrude(amount=49.02638684, mode=Mode.PRIVATE)
    fillet1_2_piece_8a = fillet1_2_piece_8a & Plane(origin=(0, 65, 0), x_dir=(-0.4835014443344291, 0, -0.8753435630234113), z_dir=(0, -1, 0)) * Cylinder(61, 111, mode=Mode.PRIVATE)
    fillet1_2_piece_8a = split(fillet1_2_piece_8a, bisect_by=Plane(origin=(4.562104637, 65, -16.854546265), z_dir=(-0.9721901531046744, 0, -0.23419288248431033)), keep=Keep.TOP, mode=Mode.PRIVATE)
    fillet1_2_piece_8a = fillet1_2_piece_8a - Plane(origin=(0, 65, 0), x_dir=(0.20920184006511774, 0, -0.977872481519635), z_dir=(0, -1, 0)) * Cylinder(59, 111, mode=Mode.PRIVATE)
    with BuildSketch(Plane(origin=(0, 65, 0), x_dir=(0.33149424176414766, 0, -0.9434572421033254), z_dir=(0.9434572421033254, 0, 0.33149424176414766))) as fillet1_2_piece_8b_section:
        with BuildLine():
            CenterArc((59 + FILLET1_R, -FILLET1_R), FILLET1_R, 90, 90)
            Line((59, -FILLET1_R), (59, 0))
            Line((59, 0), (59 + FILLET1_R, 0))
        make_face()
    fillet1_2_piece_8b = revolve(axis=Axis((0, 65, 0), (0, 1, 0)), revolution_arc=53.630888503, mode=Mode.PRIVATE)
    fillet1_2_piece_8b = fillet1_2_piece_8b & Plane(origin=(0, 65, 0), x_dir=(-0.4835014443344291, 0, -0.8753435630234113), z_dir=(0, -1, 0)) * Cylinder(61, 248, mode=Mode.PRIVATE)
    fillet1_2_piece_8b = split(fillet1_2_piece_8b, bisect_by=Plane(origin=(0.474446715, 65, 0.114290443), z_dir=(-0.9721901531046744, 0, -0.23419288248431033)), keep=Keep.TOP, mode=Mode.PRIVATE)
    fillet1_2_piece_8b = split(fillet1_2_piece_8b, bisect_by=Plane(origin=(-1.469933591, 65, -0.354095322), z_dir=(0.9721901531046743, 0, 0.23419288248431033)), keep=Keep.TOP, mode=Mode.PRIVATE)
    fillet1_2_piece_8 = fillet1_2_piece_8a & fillet1_2_piece_8b
    add(fillet1_2_piece_8, mode=Mode.SUBTRACT)


solid = part.part
